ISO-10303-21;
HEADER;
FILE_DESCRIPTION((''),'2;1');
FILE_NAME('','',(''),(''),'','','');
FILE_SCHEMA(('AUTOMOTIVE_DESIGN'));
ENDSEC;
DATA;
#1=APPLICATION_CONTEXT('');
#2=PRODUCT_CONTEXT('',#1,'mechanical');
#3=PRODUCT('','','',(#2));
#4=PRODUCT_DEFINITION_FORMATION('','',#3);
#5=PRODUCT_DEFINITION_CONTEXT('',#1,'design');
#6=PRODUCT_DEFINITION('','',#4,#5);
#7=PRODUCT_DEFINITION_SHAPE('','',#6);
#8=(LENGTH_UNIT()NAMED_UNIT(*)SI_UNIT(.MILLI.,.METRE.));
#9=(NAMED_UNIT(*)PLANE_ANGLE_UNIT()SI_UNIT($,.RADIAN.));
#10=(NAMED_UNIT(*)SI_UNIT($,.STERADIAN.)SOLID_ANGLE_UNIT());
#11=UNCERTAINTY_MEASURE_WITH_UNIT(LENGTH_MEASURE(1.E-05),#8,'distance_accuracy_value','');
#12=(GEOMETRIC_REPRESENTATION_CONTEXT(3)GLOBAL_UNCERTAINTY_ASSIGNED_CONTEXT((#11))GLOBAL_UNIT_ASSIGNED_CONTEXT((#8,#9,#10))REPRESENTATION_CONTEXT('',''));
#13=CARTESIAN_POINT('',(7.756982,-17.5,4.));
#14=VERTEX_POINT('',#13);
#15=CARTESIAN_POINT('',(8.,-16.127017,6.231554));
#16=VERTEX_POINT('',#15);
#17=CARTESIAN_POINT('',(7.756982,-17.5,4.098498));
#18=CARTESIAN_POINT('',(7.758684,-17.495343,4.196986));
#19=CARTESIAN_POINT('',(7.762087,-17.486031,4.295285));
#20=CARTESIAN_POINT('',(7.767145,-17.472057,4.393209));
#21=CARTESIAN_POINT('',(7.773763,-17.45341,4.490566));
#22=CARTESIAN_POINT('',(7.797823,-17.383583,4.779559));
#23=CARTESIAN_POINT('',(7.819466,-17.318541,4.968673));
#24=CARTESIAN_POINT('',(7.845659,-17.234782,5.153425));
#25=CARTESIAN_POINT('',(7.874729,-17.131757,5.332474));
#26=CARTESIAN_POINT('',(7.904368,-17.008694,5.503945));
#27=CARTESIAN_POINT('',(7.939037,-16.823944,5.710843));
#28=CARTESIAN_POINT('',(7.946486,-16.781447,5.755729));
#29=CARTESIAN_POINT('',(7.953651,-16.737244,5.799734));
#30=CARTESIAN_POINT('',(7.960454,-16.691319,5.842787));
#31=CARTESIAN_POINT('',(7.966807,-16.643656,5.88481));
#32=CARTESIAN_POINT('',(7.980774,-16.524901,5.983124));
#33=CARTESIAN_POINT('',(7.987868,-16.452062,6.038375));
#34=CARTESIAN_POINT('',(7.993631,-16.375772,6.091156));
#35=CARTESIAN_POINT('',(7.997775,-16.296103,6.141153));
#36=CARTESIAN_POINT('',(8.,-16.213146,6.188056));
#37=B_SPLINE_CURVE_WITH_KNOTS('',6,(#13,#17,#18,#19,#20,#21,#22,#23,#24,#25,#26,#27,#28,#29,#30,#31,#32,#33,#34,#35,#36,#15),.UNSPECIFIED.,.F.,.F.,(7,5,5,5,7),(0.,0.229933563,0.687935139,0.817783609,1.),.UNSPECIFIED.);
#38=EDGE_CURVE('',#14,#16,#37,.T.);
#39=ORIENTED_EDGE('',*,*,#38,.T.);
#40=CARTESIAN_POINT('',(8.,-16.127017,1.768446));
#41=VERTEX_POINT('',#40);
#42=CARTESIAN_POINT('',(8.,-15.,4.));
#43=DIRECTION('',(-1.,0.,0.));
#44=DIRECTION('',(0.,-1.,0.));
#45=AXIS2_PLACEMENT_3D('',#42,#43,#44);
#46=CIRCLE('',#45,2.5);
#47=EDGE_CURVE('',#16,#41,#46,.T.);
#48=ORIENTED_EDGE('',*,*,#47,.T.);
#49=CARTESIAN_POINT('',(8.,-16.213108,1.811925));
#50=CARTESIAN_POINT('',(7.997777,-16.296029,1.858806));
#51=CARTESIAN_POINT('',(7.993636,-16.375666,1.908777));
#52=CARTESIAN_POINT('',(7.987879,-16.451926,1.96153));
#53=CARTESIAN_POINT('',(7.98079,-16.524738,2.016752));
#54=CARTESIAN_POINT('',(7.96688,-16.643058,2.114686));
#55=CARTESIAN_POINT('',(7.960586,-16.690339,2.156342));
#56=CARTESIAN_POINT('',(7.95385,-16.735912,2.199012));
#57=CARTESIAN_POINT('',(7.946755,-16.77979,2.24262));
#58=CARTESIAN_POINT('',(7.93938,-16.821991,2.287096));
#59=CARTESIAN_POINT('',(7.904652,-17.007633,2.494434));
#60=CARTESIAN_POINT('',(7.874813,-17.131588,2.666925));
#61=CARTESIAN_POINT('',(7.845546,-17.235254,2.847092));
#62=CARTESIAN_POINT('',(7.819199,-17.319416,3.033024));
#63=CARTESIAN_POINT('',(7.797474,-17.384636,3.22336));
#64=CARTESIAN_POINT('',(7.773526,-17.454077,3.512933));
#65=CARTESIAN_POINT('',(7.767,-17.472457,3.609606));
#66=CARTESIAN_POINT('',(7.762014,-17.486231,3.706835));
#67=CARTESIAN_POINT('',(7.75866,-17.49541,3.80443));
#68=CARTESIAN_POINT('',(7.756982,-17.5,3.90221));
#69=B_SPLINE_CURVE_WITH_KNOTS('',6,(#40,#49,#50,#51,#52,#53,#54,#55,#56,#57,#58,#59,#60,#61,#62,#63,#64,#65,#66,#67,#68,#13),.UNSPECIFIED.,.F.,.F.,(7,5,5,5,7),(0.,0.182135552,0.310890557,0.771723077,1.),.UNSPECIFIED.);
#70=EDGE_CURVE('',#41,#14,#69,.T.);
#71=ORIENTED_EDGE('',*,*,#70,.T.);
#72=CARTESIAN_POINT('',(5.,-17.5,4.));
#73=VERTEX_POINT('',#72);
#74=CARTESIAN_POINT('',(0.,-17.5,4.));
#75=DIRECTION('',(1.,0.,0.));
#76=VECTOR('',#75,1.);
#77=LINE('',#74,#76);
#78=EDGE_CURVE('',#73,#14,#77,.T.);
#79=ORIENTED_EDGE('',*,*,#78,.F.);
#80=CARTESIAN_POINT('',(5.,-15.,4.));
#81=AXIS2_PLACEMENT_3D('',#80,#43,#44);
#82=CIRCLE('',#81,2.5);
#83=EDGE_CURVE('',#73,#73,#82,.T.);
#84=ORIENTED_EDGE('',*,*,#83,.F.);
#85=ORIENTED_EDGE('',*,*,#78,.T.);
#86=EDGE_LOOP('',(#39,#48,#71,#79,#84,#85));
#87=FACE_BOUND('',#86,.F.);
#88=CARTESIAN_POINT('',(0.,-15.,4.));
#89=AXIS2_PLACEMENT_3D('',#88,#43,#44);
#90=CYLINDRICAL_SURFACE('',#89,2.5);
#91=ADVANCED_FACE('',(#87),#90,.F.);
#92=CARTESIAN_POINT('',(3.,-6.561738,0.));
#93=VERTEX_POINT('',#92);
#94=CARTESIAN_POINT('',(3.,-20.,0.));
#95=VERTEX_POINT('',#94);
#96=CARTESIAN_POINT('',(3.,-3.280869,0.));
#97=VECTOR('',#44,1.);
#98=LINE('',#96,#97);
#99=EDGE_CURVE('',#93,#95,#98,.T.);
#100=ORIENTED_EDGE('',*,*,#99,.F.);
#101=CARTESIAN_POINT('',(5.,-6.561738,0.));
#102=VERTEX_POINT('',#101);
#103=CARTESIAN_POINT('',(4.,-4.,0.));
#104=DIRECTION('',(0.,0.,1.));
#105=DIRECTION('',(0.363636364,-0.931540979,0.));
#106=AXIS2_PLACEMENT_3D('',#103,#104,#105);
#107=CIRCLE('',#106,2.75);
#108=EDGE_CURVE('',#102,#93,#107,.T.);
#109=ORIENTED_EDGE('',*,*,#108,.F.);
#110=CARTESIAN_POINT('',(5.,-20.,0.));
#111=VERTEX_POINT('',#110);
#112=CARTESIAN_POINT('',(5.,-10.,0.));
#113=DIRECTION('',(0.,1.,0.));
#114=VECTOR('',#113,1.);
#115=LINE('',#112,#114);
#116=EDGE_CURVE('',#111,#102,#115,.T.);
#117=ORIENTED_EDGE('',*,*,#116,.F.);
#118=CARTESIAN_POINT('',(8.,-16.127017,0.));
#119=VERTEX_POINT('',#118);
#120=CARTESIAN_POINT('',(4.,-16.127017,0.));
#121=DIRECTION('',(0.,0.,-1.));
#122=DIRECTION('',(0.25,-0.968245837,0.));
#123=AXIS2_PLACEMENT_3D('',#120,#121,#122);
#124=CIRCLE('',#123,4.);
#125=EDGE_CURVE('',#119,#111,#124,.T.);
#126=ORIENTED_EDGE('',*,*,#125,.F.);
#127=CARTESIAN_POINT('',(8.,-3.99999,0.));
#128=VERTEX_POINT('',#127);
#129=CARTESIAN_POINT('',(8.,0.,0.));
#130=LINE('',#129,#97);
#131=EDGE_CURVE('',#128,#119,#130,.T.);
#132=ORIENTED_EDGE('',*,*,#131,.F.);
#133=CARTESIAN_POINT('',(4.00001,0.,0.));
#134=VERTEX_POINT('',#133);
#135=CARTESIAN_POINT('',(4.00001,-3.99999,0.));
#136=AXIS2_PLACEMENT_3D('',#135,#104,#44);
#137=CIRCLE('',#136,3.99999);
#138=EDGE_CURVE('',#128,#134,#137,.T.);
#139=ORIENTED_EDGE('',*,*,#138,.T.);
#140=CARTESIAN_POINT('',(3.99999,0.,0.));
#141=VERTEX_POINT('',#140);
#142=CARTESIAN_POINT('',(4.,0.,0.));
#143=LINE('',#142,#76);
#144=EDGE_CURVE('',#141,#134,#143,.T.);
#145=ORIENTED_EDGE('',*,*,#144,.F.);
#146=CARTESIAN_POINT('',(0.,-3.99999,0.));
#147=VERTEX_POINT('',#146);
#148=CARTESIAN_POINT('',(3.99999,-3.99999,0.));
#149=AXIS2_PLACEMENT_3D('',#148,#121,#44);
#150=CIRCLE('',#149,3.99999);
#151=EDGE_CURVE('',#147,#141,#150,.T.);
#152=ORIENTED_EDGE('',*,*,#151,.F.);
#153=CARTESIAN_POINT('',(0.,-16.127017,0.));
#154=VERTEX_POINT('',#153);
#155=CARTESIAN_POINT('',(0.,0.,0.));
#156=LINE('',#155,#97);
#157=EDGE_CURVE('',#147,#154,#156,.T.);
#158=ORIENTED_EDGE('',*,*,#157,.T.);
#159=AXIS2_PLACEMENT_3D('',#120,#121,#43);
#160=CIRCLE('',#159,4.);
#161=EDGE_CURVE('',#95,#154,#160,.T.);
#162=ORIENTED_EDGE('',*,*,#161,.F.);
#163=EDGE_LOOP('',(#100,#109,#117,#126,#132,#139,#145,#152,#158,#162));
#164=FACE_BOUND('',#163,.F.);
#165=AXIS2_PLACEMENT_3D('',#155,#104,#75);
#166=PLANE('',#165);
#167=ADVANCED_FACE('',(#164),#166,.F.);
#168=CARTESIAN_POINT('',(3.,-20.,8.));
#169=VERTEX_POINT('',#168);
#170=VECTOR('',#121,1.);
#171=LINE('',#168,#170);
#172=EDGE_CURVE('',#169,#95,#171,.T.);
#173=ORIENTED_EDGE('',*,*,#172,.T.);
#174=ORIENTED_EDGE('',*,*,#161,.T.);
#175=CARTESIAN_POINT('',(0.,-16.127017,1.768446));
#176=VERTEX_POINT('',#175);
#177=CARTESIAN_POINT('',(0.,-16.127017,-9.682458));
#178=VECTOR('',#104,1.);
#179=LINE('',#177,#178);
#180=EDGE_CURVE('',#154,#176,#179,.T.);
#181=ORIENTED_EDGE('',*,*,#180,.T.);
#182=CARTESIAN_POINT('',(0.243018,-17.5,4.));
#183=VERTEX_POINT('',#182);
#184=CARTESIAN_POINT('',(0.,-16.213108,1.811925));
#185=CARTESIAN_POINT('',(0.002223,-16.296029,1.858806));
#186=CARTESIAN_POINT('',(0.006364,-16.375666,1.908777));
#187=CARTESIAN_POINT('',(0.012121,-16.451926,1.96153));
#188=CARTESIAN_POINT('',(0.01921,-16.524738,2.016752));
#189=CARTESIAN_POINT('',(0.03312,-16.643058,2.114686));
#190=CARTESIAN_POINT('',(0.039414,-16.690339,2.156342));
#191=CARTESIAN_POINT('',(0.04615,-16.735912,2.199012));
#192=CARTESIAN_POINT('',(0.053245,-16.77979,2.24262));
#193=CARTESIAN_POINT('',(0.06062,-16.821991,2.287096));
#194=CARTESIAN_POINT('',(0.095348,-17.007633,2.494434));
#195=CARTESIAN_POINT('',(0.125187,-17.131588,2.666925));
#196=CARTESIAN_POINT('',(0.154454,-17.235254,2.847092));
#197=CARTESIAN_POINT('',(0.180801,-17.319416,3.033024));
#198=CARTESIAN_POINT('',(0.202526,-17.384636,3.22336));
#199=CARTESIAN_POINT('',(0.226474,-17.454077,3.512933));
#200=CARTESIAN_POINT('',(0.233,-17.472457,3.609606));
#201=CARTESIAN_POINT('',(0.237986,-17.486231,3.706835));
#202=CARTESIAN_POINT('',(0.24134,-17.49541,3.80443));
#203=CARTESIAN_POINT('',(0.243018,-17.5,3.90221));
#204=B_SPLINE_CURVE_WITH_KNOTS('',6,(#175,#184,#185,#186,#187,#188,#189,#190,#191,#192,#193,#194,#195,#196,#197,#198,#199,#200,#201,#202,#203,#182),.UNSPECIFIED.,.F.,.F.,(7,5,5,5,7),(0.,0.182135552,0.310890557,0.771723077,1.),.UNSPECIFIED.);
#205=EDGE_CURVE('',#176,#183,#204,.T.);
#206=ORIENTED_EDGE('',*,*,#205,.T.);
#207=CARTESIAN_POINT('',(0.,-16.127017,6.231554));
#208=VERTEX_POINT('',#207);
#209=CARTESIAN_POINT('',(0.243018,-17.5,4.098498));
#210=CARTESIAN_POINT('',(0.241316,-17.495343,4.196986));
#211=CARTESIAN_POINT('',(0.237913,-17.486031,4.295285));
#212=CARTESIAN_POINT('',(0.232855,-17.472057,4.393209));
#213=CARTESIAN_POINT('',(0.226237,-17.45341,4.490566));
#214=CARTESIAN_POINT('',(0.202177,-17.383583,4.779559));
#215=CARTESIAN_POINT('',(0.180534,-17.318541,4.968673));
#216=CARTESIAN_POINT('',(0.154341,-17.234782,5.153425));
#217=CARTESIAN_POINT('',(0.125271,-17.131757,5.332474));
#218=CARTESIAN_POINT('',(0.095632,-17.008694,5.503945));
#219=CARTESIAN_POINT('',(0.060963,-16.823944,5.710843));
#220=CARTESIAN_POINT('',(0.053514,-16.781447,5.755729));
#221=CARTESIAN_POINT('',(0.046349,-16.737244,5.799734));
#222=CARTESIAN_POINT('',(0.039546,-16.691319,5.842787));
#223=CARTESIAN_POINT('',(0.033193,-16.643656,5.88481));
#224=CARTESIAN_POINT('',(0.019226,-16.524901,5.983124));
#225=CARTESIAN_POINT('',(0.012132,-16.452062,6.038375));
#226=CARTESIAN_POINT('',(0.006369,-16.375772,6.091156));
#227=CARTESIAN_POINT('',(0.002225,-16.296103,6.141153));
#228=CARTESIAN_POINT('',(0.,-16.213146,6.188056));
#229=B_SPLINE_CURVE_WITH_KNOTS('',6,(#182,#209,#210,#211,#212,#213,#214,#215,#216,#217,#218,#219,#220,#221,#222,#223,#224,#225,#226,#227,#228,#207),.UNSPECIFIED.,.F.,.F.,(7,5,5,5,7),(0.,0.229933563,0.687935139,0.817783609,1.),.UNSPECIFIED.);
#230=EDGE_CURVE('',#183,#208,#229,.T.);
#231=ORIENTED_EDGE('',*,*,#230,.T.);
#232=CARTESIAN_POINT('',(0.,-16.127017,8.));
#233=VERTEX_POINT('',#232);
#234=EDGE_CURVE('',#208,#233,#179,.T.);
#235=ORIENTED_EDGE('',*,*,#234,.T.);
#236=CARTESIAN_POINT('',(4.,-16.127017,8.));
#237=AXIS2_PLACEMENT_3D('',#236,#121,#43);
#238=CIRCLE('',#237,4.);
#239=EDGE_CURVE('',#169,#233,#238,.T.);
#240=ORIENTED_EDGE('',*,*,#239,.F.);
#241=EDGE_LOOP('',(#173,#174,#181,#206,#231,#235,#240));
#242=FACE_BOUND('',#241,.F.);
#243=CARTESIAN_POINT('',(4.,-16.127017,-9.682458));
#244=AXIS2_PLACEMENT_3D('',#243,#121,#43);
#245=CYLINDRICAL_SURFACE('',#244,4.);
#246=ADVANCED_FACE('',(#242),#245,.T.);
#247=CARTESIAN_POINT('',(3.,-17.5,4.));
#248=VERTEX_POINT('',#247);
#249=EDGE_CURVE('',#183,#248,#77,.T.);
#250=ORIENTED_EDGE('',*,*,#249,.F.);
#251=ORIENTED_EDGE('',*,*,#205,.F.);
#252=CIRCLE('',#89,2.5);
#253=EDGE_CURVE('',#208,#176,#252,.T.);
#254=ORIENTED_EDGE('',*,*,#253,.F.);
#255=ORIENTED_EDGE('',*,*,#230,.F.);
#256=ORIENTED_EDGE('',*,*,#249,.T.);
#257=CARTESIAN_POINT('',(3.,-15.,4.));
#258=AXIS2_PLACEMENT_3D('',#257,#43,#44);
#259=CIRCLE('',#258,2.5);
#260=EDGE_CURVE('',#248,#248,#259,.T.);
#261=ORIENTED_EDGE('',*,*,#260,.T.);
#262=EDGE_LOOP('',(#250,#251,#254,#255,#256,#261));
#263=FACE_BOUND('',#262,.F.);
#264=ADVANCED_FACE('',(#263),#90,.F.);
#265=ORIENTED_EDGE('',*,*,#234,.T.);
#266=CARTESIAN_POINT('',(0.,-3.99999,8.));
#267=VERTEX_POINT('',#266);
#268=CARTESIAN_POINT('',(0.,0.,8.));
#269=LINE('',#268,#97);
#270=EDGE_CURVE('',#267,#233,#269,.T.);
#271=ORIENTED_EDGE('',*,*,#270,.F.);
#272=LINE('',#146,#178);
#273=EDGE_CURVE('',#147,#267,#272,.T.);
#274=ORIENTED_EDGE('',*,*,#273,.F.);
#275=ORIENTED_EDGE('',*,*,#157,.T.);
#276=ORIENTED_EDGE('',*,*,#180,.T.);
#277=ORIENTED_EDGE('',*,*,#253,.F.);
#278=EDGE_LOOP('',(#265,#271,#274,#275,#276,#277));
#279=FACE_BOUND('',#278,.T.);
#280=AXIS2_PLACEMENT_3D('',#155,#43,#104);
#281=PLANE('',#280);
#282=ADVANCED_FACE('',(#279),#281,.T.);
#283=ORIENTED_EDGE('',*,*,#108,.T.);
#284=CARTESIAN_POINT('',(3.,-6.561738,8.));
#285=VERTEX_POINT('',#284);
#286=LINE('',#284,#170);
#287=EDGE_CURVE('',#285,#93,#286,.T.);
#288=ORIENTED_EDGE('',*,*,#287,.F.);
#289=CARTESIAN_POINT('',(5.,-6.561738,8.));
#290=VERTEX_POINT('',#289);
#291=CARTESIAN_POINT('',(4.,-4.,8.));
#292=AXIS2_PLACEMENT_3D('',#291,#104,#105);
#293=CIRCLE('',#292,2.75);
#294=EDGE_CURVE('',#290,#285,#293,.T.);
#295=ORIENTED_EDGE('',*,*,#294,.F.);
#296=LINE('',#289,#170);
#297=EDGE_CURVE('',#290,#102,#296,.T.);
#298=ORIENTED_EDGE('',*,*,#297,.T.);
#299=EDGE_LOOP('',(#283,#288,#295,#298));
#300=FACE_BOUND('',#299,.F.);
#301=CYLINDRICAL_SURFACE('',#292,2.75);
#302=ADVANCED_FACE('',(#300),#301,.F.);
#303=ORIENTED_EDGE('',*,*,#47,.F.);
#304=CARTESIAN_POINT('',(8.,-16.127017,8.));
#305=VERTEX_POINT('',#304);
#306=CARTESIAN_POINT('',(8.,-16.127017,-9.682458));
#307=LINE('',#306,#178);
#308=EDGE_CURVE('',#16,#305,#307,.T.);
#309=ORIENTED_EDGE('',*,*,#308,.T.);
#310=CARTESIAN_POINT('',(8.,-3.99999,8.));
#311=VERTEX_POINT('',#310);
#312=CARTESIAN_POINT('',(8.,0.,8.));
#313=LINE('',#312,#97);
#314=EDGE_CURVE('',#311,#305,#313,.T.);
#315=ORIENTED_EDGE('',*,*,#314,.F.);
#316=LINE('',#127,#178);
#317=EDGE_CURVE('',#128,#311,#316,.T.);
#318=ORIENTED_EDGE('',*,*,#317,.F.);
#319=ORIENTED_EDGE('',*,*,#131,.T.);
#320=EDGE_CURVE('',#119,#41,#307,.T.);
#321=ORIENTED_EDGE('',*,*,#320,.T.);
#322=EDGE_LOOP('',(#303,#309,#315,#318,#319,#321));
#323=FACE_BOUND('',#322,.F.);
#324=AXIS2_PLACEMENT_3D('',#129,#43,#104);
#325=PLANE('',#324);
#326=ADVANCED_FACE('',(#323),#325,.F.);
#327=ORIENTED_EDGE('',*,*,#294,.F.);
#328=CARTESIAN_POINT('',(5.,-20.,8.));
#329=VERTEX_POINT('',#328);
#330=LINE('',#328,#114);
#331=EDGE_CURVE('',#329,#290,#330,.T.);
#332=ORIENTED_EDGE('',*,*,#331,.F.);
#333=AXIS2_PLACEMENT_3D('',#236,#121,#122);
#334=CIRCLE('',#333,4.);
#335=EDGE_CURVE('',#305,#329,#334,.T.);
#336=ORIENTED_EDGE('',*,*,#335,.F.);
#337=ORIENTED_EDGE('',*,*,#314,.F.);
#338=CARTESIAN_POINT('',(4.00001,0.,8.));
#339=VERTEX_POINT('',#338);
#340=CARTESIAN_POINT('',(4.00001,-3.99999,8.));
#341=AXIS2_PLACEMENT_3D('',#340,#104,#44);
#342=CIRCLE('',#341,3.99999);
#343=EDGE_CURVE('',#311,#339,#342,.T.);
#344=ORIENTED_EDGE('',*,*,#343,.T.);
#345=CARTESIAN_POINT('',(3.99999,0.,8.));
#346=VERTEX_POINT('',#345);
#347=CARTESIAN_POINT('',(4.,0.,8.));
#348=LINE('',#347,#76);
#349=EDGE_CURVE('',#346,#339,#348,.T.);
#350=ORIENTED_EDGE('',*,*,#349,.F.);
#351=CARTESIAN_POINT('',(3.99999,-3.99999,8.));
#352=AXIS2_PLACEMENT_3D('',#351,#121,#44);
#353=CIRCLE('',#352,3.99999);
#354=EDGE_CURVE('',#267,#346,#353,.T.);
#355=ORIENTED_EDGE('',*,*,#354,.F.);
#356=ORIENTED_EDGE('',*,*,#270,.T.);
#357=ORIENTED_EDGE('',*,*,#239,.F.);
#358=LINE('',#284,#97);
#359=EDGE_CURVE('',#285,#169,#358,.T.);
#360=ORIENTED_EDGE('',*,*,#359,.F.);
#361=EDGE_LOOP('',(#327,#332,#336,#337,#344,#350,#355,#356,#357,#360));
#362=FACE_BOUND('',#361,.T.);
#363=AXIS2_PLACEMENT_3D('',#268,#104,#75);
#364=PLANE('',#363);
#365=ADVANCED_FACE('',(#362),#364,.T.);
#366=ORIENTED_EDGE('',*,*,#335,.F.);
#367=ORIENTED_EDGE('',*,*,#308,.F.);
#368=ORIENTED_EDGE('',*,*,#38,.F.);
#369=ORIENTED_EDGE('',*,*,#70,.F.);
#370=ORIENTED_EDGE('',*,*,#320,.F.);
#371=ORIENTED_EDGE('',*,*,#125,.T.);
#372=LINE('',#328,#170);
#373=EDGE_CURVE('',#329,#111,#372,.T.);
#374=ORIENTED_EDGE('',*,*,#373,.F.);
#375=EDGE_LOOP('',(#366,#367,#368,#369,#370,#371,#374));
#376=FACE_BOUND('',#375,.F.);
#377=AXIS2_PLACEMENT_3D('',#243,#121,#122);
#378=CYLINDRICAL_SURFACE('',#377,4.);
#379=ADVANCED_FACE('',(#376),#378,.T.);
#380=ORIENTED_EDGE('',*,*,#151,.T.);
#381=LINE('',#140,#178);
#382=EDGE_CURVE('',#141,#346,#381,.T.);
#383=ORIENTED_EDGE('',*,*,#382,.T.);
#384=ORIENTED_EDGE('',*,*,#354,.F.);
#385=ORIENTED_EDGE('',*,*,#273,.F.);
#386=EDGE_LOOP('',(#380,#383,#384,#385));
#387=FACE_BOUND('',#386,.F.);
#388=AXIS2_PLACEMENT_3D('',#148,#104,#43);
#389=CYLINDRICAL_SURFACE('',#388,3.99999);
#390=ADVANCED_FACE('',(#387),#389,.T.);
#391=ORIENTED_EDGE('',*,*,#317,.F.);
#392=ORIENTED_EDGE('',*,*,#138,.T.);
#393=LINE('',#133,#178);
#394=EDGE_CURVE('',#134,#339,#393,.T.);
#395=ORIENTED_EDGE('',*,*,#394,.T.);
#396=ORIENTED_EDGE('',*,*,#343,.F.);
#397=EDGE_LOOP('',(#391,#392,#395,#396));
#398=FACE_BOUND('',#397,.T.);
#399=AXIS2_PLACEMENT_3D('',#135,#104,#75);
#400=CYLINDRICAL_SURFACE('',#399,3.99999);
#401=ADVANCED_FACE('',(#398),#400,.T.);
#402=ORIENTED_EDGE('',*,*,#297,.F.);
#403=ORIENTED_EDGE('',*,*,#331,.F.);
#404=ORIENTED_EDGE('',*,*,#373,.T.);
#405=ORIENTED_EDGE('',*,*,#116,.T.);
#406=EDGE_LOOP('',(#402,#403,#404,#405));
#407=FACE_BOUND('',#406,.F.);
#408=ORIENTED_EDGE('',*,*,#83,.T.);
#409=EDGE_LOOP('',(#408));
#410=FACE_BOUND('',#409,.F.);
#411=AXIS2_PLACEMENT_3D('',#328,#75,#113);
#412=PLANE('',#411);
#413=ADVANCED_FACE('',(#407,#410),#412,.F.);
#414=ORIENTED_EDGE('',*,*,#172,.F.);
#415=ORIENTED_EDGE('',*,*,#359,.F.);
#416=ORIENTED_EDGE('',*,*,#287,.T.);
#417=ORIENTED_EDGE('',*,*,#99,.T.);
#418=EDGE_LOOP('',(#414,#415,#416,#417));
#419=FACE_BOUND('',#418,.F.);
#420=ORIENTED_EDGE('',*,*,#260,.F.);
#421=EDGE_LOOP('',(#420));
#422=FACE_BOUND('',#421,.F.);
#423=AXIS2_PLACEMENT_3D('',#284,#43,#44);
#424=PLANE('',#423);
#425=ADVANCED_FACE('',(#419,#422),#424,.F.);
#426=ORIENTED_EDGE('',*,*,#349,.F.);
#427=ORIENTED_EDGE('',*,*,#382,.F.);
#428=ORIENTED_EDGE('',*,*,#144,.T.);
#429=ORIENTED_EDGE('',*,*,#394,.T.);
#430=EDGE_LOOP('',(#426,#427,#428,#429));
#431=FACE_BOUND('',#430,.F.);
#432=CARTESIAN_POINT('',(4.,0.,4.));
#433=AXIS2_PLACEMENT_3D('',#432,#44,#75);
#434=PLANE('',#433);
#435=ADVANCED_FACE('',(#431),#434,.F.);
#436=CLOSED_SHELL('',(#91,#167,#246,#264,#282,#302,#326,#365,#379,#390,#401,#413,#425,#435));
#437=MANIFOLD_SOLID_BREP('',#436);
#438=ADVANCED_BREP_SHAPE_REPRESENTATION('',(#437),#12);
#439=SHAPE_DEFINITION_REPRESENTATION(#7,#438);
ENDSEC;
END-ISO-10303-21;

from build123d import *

# Parameters (mm, degrees)
F0_W        = 8
F0_H        = 8
F1_DEPTH    = 20
F2_R        = 3.99999
F4_DEPTH    = 25
F6_T1_DEPTH = 27.364916731
F5_R        = 2.5
F7_DEPTH    = 25


# Not quite as in the source:
# - a fillet or chamfer that OpenCascade refuses, or shapes differently, is made with other operations: its cross-section is extruded or revolved along the edge and cut away or added
# - a fillet or chamfer is up to 0.001 mm smaller than in the source, because OpenCascade refuses the exact size


with BuildPart() as f1:
    # F0 (on Front) → F1 (new body)
    with BuildSketch(Plane.XZ):
        with Locations((4, 4)):
            Rectangle(F0_W, F0_H)
    extrude(amount=F1_DEPTH)

    # F2 (radius 4 in the source; OpenCascade refuses exactly that, so slightly less here)
    f2_edges = [f1.edges().sort_by_distance(p)[0] for p in [
        (8, 0, 4),
        (0, 0, 4),
    ]]
    fillet(f2_edges, radius=F2_R)

    # F3 (on face) → F4 (cut)
    with BuildSketch(Plane.XY.offset(8)):
        with BuildLine():
            Line((5, -20), (5, -6.5617376915))
            ThreePointArc((5, -6.5617376915), (4, -1.25), (3, -6.5617376915))
            Line((3, -6.5617376915), (3, -20))
            Line((3, -20), (4, -20))
            Line((4, -20), (5, -20))
        make_face()
    extrude(amount=-F4_DEPTH, mode=Mode.SUBTRACT)

    # F6: fillet of radius 4 on 2 edges, made by hand

    # F6_s2 → F6_t1 (cut)
    with BuildSketch(Plane.XY.offset(-9.6824583655)):
        with BuildLine():
            ThreePointArc((0, -16.1270166538), (0.8377223398, -18.5765063966), (3, -20))
            Line((3, -20), (0, -20))
            Line((0, -20), (0, -16.1270166538))
        make_face()
        with BuildLine():
            ThreePointArc((5, -20), (7.1622776602, -18.5765063966), (8, -16.1270166538))
            Line((8, -16.1270166538), (8, -20))
            Line((8, -20), (5, -20))
        make_face()
    extrude(amount=F6_T1_DEPTH, mode=Mode.SUBTRACT)

    # F5 (on face) → F7 (cut)
    with BuildSketch(Plane(origin=(0, 0, 0), x_dir=(0, -1, 0), z_dir=(-1, 0, 0))):
        with Locations((15, 4)):
            Circle(F5_R)
    extrude(amount=-F7_DEPTH, mode=Mode.SUBTRACT)


solid = f1.part
